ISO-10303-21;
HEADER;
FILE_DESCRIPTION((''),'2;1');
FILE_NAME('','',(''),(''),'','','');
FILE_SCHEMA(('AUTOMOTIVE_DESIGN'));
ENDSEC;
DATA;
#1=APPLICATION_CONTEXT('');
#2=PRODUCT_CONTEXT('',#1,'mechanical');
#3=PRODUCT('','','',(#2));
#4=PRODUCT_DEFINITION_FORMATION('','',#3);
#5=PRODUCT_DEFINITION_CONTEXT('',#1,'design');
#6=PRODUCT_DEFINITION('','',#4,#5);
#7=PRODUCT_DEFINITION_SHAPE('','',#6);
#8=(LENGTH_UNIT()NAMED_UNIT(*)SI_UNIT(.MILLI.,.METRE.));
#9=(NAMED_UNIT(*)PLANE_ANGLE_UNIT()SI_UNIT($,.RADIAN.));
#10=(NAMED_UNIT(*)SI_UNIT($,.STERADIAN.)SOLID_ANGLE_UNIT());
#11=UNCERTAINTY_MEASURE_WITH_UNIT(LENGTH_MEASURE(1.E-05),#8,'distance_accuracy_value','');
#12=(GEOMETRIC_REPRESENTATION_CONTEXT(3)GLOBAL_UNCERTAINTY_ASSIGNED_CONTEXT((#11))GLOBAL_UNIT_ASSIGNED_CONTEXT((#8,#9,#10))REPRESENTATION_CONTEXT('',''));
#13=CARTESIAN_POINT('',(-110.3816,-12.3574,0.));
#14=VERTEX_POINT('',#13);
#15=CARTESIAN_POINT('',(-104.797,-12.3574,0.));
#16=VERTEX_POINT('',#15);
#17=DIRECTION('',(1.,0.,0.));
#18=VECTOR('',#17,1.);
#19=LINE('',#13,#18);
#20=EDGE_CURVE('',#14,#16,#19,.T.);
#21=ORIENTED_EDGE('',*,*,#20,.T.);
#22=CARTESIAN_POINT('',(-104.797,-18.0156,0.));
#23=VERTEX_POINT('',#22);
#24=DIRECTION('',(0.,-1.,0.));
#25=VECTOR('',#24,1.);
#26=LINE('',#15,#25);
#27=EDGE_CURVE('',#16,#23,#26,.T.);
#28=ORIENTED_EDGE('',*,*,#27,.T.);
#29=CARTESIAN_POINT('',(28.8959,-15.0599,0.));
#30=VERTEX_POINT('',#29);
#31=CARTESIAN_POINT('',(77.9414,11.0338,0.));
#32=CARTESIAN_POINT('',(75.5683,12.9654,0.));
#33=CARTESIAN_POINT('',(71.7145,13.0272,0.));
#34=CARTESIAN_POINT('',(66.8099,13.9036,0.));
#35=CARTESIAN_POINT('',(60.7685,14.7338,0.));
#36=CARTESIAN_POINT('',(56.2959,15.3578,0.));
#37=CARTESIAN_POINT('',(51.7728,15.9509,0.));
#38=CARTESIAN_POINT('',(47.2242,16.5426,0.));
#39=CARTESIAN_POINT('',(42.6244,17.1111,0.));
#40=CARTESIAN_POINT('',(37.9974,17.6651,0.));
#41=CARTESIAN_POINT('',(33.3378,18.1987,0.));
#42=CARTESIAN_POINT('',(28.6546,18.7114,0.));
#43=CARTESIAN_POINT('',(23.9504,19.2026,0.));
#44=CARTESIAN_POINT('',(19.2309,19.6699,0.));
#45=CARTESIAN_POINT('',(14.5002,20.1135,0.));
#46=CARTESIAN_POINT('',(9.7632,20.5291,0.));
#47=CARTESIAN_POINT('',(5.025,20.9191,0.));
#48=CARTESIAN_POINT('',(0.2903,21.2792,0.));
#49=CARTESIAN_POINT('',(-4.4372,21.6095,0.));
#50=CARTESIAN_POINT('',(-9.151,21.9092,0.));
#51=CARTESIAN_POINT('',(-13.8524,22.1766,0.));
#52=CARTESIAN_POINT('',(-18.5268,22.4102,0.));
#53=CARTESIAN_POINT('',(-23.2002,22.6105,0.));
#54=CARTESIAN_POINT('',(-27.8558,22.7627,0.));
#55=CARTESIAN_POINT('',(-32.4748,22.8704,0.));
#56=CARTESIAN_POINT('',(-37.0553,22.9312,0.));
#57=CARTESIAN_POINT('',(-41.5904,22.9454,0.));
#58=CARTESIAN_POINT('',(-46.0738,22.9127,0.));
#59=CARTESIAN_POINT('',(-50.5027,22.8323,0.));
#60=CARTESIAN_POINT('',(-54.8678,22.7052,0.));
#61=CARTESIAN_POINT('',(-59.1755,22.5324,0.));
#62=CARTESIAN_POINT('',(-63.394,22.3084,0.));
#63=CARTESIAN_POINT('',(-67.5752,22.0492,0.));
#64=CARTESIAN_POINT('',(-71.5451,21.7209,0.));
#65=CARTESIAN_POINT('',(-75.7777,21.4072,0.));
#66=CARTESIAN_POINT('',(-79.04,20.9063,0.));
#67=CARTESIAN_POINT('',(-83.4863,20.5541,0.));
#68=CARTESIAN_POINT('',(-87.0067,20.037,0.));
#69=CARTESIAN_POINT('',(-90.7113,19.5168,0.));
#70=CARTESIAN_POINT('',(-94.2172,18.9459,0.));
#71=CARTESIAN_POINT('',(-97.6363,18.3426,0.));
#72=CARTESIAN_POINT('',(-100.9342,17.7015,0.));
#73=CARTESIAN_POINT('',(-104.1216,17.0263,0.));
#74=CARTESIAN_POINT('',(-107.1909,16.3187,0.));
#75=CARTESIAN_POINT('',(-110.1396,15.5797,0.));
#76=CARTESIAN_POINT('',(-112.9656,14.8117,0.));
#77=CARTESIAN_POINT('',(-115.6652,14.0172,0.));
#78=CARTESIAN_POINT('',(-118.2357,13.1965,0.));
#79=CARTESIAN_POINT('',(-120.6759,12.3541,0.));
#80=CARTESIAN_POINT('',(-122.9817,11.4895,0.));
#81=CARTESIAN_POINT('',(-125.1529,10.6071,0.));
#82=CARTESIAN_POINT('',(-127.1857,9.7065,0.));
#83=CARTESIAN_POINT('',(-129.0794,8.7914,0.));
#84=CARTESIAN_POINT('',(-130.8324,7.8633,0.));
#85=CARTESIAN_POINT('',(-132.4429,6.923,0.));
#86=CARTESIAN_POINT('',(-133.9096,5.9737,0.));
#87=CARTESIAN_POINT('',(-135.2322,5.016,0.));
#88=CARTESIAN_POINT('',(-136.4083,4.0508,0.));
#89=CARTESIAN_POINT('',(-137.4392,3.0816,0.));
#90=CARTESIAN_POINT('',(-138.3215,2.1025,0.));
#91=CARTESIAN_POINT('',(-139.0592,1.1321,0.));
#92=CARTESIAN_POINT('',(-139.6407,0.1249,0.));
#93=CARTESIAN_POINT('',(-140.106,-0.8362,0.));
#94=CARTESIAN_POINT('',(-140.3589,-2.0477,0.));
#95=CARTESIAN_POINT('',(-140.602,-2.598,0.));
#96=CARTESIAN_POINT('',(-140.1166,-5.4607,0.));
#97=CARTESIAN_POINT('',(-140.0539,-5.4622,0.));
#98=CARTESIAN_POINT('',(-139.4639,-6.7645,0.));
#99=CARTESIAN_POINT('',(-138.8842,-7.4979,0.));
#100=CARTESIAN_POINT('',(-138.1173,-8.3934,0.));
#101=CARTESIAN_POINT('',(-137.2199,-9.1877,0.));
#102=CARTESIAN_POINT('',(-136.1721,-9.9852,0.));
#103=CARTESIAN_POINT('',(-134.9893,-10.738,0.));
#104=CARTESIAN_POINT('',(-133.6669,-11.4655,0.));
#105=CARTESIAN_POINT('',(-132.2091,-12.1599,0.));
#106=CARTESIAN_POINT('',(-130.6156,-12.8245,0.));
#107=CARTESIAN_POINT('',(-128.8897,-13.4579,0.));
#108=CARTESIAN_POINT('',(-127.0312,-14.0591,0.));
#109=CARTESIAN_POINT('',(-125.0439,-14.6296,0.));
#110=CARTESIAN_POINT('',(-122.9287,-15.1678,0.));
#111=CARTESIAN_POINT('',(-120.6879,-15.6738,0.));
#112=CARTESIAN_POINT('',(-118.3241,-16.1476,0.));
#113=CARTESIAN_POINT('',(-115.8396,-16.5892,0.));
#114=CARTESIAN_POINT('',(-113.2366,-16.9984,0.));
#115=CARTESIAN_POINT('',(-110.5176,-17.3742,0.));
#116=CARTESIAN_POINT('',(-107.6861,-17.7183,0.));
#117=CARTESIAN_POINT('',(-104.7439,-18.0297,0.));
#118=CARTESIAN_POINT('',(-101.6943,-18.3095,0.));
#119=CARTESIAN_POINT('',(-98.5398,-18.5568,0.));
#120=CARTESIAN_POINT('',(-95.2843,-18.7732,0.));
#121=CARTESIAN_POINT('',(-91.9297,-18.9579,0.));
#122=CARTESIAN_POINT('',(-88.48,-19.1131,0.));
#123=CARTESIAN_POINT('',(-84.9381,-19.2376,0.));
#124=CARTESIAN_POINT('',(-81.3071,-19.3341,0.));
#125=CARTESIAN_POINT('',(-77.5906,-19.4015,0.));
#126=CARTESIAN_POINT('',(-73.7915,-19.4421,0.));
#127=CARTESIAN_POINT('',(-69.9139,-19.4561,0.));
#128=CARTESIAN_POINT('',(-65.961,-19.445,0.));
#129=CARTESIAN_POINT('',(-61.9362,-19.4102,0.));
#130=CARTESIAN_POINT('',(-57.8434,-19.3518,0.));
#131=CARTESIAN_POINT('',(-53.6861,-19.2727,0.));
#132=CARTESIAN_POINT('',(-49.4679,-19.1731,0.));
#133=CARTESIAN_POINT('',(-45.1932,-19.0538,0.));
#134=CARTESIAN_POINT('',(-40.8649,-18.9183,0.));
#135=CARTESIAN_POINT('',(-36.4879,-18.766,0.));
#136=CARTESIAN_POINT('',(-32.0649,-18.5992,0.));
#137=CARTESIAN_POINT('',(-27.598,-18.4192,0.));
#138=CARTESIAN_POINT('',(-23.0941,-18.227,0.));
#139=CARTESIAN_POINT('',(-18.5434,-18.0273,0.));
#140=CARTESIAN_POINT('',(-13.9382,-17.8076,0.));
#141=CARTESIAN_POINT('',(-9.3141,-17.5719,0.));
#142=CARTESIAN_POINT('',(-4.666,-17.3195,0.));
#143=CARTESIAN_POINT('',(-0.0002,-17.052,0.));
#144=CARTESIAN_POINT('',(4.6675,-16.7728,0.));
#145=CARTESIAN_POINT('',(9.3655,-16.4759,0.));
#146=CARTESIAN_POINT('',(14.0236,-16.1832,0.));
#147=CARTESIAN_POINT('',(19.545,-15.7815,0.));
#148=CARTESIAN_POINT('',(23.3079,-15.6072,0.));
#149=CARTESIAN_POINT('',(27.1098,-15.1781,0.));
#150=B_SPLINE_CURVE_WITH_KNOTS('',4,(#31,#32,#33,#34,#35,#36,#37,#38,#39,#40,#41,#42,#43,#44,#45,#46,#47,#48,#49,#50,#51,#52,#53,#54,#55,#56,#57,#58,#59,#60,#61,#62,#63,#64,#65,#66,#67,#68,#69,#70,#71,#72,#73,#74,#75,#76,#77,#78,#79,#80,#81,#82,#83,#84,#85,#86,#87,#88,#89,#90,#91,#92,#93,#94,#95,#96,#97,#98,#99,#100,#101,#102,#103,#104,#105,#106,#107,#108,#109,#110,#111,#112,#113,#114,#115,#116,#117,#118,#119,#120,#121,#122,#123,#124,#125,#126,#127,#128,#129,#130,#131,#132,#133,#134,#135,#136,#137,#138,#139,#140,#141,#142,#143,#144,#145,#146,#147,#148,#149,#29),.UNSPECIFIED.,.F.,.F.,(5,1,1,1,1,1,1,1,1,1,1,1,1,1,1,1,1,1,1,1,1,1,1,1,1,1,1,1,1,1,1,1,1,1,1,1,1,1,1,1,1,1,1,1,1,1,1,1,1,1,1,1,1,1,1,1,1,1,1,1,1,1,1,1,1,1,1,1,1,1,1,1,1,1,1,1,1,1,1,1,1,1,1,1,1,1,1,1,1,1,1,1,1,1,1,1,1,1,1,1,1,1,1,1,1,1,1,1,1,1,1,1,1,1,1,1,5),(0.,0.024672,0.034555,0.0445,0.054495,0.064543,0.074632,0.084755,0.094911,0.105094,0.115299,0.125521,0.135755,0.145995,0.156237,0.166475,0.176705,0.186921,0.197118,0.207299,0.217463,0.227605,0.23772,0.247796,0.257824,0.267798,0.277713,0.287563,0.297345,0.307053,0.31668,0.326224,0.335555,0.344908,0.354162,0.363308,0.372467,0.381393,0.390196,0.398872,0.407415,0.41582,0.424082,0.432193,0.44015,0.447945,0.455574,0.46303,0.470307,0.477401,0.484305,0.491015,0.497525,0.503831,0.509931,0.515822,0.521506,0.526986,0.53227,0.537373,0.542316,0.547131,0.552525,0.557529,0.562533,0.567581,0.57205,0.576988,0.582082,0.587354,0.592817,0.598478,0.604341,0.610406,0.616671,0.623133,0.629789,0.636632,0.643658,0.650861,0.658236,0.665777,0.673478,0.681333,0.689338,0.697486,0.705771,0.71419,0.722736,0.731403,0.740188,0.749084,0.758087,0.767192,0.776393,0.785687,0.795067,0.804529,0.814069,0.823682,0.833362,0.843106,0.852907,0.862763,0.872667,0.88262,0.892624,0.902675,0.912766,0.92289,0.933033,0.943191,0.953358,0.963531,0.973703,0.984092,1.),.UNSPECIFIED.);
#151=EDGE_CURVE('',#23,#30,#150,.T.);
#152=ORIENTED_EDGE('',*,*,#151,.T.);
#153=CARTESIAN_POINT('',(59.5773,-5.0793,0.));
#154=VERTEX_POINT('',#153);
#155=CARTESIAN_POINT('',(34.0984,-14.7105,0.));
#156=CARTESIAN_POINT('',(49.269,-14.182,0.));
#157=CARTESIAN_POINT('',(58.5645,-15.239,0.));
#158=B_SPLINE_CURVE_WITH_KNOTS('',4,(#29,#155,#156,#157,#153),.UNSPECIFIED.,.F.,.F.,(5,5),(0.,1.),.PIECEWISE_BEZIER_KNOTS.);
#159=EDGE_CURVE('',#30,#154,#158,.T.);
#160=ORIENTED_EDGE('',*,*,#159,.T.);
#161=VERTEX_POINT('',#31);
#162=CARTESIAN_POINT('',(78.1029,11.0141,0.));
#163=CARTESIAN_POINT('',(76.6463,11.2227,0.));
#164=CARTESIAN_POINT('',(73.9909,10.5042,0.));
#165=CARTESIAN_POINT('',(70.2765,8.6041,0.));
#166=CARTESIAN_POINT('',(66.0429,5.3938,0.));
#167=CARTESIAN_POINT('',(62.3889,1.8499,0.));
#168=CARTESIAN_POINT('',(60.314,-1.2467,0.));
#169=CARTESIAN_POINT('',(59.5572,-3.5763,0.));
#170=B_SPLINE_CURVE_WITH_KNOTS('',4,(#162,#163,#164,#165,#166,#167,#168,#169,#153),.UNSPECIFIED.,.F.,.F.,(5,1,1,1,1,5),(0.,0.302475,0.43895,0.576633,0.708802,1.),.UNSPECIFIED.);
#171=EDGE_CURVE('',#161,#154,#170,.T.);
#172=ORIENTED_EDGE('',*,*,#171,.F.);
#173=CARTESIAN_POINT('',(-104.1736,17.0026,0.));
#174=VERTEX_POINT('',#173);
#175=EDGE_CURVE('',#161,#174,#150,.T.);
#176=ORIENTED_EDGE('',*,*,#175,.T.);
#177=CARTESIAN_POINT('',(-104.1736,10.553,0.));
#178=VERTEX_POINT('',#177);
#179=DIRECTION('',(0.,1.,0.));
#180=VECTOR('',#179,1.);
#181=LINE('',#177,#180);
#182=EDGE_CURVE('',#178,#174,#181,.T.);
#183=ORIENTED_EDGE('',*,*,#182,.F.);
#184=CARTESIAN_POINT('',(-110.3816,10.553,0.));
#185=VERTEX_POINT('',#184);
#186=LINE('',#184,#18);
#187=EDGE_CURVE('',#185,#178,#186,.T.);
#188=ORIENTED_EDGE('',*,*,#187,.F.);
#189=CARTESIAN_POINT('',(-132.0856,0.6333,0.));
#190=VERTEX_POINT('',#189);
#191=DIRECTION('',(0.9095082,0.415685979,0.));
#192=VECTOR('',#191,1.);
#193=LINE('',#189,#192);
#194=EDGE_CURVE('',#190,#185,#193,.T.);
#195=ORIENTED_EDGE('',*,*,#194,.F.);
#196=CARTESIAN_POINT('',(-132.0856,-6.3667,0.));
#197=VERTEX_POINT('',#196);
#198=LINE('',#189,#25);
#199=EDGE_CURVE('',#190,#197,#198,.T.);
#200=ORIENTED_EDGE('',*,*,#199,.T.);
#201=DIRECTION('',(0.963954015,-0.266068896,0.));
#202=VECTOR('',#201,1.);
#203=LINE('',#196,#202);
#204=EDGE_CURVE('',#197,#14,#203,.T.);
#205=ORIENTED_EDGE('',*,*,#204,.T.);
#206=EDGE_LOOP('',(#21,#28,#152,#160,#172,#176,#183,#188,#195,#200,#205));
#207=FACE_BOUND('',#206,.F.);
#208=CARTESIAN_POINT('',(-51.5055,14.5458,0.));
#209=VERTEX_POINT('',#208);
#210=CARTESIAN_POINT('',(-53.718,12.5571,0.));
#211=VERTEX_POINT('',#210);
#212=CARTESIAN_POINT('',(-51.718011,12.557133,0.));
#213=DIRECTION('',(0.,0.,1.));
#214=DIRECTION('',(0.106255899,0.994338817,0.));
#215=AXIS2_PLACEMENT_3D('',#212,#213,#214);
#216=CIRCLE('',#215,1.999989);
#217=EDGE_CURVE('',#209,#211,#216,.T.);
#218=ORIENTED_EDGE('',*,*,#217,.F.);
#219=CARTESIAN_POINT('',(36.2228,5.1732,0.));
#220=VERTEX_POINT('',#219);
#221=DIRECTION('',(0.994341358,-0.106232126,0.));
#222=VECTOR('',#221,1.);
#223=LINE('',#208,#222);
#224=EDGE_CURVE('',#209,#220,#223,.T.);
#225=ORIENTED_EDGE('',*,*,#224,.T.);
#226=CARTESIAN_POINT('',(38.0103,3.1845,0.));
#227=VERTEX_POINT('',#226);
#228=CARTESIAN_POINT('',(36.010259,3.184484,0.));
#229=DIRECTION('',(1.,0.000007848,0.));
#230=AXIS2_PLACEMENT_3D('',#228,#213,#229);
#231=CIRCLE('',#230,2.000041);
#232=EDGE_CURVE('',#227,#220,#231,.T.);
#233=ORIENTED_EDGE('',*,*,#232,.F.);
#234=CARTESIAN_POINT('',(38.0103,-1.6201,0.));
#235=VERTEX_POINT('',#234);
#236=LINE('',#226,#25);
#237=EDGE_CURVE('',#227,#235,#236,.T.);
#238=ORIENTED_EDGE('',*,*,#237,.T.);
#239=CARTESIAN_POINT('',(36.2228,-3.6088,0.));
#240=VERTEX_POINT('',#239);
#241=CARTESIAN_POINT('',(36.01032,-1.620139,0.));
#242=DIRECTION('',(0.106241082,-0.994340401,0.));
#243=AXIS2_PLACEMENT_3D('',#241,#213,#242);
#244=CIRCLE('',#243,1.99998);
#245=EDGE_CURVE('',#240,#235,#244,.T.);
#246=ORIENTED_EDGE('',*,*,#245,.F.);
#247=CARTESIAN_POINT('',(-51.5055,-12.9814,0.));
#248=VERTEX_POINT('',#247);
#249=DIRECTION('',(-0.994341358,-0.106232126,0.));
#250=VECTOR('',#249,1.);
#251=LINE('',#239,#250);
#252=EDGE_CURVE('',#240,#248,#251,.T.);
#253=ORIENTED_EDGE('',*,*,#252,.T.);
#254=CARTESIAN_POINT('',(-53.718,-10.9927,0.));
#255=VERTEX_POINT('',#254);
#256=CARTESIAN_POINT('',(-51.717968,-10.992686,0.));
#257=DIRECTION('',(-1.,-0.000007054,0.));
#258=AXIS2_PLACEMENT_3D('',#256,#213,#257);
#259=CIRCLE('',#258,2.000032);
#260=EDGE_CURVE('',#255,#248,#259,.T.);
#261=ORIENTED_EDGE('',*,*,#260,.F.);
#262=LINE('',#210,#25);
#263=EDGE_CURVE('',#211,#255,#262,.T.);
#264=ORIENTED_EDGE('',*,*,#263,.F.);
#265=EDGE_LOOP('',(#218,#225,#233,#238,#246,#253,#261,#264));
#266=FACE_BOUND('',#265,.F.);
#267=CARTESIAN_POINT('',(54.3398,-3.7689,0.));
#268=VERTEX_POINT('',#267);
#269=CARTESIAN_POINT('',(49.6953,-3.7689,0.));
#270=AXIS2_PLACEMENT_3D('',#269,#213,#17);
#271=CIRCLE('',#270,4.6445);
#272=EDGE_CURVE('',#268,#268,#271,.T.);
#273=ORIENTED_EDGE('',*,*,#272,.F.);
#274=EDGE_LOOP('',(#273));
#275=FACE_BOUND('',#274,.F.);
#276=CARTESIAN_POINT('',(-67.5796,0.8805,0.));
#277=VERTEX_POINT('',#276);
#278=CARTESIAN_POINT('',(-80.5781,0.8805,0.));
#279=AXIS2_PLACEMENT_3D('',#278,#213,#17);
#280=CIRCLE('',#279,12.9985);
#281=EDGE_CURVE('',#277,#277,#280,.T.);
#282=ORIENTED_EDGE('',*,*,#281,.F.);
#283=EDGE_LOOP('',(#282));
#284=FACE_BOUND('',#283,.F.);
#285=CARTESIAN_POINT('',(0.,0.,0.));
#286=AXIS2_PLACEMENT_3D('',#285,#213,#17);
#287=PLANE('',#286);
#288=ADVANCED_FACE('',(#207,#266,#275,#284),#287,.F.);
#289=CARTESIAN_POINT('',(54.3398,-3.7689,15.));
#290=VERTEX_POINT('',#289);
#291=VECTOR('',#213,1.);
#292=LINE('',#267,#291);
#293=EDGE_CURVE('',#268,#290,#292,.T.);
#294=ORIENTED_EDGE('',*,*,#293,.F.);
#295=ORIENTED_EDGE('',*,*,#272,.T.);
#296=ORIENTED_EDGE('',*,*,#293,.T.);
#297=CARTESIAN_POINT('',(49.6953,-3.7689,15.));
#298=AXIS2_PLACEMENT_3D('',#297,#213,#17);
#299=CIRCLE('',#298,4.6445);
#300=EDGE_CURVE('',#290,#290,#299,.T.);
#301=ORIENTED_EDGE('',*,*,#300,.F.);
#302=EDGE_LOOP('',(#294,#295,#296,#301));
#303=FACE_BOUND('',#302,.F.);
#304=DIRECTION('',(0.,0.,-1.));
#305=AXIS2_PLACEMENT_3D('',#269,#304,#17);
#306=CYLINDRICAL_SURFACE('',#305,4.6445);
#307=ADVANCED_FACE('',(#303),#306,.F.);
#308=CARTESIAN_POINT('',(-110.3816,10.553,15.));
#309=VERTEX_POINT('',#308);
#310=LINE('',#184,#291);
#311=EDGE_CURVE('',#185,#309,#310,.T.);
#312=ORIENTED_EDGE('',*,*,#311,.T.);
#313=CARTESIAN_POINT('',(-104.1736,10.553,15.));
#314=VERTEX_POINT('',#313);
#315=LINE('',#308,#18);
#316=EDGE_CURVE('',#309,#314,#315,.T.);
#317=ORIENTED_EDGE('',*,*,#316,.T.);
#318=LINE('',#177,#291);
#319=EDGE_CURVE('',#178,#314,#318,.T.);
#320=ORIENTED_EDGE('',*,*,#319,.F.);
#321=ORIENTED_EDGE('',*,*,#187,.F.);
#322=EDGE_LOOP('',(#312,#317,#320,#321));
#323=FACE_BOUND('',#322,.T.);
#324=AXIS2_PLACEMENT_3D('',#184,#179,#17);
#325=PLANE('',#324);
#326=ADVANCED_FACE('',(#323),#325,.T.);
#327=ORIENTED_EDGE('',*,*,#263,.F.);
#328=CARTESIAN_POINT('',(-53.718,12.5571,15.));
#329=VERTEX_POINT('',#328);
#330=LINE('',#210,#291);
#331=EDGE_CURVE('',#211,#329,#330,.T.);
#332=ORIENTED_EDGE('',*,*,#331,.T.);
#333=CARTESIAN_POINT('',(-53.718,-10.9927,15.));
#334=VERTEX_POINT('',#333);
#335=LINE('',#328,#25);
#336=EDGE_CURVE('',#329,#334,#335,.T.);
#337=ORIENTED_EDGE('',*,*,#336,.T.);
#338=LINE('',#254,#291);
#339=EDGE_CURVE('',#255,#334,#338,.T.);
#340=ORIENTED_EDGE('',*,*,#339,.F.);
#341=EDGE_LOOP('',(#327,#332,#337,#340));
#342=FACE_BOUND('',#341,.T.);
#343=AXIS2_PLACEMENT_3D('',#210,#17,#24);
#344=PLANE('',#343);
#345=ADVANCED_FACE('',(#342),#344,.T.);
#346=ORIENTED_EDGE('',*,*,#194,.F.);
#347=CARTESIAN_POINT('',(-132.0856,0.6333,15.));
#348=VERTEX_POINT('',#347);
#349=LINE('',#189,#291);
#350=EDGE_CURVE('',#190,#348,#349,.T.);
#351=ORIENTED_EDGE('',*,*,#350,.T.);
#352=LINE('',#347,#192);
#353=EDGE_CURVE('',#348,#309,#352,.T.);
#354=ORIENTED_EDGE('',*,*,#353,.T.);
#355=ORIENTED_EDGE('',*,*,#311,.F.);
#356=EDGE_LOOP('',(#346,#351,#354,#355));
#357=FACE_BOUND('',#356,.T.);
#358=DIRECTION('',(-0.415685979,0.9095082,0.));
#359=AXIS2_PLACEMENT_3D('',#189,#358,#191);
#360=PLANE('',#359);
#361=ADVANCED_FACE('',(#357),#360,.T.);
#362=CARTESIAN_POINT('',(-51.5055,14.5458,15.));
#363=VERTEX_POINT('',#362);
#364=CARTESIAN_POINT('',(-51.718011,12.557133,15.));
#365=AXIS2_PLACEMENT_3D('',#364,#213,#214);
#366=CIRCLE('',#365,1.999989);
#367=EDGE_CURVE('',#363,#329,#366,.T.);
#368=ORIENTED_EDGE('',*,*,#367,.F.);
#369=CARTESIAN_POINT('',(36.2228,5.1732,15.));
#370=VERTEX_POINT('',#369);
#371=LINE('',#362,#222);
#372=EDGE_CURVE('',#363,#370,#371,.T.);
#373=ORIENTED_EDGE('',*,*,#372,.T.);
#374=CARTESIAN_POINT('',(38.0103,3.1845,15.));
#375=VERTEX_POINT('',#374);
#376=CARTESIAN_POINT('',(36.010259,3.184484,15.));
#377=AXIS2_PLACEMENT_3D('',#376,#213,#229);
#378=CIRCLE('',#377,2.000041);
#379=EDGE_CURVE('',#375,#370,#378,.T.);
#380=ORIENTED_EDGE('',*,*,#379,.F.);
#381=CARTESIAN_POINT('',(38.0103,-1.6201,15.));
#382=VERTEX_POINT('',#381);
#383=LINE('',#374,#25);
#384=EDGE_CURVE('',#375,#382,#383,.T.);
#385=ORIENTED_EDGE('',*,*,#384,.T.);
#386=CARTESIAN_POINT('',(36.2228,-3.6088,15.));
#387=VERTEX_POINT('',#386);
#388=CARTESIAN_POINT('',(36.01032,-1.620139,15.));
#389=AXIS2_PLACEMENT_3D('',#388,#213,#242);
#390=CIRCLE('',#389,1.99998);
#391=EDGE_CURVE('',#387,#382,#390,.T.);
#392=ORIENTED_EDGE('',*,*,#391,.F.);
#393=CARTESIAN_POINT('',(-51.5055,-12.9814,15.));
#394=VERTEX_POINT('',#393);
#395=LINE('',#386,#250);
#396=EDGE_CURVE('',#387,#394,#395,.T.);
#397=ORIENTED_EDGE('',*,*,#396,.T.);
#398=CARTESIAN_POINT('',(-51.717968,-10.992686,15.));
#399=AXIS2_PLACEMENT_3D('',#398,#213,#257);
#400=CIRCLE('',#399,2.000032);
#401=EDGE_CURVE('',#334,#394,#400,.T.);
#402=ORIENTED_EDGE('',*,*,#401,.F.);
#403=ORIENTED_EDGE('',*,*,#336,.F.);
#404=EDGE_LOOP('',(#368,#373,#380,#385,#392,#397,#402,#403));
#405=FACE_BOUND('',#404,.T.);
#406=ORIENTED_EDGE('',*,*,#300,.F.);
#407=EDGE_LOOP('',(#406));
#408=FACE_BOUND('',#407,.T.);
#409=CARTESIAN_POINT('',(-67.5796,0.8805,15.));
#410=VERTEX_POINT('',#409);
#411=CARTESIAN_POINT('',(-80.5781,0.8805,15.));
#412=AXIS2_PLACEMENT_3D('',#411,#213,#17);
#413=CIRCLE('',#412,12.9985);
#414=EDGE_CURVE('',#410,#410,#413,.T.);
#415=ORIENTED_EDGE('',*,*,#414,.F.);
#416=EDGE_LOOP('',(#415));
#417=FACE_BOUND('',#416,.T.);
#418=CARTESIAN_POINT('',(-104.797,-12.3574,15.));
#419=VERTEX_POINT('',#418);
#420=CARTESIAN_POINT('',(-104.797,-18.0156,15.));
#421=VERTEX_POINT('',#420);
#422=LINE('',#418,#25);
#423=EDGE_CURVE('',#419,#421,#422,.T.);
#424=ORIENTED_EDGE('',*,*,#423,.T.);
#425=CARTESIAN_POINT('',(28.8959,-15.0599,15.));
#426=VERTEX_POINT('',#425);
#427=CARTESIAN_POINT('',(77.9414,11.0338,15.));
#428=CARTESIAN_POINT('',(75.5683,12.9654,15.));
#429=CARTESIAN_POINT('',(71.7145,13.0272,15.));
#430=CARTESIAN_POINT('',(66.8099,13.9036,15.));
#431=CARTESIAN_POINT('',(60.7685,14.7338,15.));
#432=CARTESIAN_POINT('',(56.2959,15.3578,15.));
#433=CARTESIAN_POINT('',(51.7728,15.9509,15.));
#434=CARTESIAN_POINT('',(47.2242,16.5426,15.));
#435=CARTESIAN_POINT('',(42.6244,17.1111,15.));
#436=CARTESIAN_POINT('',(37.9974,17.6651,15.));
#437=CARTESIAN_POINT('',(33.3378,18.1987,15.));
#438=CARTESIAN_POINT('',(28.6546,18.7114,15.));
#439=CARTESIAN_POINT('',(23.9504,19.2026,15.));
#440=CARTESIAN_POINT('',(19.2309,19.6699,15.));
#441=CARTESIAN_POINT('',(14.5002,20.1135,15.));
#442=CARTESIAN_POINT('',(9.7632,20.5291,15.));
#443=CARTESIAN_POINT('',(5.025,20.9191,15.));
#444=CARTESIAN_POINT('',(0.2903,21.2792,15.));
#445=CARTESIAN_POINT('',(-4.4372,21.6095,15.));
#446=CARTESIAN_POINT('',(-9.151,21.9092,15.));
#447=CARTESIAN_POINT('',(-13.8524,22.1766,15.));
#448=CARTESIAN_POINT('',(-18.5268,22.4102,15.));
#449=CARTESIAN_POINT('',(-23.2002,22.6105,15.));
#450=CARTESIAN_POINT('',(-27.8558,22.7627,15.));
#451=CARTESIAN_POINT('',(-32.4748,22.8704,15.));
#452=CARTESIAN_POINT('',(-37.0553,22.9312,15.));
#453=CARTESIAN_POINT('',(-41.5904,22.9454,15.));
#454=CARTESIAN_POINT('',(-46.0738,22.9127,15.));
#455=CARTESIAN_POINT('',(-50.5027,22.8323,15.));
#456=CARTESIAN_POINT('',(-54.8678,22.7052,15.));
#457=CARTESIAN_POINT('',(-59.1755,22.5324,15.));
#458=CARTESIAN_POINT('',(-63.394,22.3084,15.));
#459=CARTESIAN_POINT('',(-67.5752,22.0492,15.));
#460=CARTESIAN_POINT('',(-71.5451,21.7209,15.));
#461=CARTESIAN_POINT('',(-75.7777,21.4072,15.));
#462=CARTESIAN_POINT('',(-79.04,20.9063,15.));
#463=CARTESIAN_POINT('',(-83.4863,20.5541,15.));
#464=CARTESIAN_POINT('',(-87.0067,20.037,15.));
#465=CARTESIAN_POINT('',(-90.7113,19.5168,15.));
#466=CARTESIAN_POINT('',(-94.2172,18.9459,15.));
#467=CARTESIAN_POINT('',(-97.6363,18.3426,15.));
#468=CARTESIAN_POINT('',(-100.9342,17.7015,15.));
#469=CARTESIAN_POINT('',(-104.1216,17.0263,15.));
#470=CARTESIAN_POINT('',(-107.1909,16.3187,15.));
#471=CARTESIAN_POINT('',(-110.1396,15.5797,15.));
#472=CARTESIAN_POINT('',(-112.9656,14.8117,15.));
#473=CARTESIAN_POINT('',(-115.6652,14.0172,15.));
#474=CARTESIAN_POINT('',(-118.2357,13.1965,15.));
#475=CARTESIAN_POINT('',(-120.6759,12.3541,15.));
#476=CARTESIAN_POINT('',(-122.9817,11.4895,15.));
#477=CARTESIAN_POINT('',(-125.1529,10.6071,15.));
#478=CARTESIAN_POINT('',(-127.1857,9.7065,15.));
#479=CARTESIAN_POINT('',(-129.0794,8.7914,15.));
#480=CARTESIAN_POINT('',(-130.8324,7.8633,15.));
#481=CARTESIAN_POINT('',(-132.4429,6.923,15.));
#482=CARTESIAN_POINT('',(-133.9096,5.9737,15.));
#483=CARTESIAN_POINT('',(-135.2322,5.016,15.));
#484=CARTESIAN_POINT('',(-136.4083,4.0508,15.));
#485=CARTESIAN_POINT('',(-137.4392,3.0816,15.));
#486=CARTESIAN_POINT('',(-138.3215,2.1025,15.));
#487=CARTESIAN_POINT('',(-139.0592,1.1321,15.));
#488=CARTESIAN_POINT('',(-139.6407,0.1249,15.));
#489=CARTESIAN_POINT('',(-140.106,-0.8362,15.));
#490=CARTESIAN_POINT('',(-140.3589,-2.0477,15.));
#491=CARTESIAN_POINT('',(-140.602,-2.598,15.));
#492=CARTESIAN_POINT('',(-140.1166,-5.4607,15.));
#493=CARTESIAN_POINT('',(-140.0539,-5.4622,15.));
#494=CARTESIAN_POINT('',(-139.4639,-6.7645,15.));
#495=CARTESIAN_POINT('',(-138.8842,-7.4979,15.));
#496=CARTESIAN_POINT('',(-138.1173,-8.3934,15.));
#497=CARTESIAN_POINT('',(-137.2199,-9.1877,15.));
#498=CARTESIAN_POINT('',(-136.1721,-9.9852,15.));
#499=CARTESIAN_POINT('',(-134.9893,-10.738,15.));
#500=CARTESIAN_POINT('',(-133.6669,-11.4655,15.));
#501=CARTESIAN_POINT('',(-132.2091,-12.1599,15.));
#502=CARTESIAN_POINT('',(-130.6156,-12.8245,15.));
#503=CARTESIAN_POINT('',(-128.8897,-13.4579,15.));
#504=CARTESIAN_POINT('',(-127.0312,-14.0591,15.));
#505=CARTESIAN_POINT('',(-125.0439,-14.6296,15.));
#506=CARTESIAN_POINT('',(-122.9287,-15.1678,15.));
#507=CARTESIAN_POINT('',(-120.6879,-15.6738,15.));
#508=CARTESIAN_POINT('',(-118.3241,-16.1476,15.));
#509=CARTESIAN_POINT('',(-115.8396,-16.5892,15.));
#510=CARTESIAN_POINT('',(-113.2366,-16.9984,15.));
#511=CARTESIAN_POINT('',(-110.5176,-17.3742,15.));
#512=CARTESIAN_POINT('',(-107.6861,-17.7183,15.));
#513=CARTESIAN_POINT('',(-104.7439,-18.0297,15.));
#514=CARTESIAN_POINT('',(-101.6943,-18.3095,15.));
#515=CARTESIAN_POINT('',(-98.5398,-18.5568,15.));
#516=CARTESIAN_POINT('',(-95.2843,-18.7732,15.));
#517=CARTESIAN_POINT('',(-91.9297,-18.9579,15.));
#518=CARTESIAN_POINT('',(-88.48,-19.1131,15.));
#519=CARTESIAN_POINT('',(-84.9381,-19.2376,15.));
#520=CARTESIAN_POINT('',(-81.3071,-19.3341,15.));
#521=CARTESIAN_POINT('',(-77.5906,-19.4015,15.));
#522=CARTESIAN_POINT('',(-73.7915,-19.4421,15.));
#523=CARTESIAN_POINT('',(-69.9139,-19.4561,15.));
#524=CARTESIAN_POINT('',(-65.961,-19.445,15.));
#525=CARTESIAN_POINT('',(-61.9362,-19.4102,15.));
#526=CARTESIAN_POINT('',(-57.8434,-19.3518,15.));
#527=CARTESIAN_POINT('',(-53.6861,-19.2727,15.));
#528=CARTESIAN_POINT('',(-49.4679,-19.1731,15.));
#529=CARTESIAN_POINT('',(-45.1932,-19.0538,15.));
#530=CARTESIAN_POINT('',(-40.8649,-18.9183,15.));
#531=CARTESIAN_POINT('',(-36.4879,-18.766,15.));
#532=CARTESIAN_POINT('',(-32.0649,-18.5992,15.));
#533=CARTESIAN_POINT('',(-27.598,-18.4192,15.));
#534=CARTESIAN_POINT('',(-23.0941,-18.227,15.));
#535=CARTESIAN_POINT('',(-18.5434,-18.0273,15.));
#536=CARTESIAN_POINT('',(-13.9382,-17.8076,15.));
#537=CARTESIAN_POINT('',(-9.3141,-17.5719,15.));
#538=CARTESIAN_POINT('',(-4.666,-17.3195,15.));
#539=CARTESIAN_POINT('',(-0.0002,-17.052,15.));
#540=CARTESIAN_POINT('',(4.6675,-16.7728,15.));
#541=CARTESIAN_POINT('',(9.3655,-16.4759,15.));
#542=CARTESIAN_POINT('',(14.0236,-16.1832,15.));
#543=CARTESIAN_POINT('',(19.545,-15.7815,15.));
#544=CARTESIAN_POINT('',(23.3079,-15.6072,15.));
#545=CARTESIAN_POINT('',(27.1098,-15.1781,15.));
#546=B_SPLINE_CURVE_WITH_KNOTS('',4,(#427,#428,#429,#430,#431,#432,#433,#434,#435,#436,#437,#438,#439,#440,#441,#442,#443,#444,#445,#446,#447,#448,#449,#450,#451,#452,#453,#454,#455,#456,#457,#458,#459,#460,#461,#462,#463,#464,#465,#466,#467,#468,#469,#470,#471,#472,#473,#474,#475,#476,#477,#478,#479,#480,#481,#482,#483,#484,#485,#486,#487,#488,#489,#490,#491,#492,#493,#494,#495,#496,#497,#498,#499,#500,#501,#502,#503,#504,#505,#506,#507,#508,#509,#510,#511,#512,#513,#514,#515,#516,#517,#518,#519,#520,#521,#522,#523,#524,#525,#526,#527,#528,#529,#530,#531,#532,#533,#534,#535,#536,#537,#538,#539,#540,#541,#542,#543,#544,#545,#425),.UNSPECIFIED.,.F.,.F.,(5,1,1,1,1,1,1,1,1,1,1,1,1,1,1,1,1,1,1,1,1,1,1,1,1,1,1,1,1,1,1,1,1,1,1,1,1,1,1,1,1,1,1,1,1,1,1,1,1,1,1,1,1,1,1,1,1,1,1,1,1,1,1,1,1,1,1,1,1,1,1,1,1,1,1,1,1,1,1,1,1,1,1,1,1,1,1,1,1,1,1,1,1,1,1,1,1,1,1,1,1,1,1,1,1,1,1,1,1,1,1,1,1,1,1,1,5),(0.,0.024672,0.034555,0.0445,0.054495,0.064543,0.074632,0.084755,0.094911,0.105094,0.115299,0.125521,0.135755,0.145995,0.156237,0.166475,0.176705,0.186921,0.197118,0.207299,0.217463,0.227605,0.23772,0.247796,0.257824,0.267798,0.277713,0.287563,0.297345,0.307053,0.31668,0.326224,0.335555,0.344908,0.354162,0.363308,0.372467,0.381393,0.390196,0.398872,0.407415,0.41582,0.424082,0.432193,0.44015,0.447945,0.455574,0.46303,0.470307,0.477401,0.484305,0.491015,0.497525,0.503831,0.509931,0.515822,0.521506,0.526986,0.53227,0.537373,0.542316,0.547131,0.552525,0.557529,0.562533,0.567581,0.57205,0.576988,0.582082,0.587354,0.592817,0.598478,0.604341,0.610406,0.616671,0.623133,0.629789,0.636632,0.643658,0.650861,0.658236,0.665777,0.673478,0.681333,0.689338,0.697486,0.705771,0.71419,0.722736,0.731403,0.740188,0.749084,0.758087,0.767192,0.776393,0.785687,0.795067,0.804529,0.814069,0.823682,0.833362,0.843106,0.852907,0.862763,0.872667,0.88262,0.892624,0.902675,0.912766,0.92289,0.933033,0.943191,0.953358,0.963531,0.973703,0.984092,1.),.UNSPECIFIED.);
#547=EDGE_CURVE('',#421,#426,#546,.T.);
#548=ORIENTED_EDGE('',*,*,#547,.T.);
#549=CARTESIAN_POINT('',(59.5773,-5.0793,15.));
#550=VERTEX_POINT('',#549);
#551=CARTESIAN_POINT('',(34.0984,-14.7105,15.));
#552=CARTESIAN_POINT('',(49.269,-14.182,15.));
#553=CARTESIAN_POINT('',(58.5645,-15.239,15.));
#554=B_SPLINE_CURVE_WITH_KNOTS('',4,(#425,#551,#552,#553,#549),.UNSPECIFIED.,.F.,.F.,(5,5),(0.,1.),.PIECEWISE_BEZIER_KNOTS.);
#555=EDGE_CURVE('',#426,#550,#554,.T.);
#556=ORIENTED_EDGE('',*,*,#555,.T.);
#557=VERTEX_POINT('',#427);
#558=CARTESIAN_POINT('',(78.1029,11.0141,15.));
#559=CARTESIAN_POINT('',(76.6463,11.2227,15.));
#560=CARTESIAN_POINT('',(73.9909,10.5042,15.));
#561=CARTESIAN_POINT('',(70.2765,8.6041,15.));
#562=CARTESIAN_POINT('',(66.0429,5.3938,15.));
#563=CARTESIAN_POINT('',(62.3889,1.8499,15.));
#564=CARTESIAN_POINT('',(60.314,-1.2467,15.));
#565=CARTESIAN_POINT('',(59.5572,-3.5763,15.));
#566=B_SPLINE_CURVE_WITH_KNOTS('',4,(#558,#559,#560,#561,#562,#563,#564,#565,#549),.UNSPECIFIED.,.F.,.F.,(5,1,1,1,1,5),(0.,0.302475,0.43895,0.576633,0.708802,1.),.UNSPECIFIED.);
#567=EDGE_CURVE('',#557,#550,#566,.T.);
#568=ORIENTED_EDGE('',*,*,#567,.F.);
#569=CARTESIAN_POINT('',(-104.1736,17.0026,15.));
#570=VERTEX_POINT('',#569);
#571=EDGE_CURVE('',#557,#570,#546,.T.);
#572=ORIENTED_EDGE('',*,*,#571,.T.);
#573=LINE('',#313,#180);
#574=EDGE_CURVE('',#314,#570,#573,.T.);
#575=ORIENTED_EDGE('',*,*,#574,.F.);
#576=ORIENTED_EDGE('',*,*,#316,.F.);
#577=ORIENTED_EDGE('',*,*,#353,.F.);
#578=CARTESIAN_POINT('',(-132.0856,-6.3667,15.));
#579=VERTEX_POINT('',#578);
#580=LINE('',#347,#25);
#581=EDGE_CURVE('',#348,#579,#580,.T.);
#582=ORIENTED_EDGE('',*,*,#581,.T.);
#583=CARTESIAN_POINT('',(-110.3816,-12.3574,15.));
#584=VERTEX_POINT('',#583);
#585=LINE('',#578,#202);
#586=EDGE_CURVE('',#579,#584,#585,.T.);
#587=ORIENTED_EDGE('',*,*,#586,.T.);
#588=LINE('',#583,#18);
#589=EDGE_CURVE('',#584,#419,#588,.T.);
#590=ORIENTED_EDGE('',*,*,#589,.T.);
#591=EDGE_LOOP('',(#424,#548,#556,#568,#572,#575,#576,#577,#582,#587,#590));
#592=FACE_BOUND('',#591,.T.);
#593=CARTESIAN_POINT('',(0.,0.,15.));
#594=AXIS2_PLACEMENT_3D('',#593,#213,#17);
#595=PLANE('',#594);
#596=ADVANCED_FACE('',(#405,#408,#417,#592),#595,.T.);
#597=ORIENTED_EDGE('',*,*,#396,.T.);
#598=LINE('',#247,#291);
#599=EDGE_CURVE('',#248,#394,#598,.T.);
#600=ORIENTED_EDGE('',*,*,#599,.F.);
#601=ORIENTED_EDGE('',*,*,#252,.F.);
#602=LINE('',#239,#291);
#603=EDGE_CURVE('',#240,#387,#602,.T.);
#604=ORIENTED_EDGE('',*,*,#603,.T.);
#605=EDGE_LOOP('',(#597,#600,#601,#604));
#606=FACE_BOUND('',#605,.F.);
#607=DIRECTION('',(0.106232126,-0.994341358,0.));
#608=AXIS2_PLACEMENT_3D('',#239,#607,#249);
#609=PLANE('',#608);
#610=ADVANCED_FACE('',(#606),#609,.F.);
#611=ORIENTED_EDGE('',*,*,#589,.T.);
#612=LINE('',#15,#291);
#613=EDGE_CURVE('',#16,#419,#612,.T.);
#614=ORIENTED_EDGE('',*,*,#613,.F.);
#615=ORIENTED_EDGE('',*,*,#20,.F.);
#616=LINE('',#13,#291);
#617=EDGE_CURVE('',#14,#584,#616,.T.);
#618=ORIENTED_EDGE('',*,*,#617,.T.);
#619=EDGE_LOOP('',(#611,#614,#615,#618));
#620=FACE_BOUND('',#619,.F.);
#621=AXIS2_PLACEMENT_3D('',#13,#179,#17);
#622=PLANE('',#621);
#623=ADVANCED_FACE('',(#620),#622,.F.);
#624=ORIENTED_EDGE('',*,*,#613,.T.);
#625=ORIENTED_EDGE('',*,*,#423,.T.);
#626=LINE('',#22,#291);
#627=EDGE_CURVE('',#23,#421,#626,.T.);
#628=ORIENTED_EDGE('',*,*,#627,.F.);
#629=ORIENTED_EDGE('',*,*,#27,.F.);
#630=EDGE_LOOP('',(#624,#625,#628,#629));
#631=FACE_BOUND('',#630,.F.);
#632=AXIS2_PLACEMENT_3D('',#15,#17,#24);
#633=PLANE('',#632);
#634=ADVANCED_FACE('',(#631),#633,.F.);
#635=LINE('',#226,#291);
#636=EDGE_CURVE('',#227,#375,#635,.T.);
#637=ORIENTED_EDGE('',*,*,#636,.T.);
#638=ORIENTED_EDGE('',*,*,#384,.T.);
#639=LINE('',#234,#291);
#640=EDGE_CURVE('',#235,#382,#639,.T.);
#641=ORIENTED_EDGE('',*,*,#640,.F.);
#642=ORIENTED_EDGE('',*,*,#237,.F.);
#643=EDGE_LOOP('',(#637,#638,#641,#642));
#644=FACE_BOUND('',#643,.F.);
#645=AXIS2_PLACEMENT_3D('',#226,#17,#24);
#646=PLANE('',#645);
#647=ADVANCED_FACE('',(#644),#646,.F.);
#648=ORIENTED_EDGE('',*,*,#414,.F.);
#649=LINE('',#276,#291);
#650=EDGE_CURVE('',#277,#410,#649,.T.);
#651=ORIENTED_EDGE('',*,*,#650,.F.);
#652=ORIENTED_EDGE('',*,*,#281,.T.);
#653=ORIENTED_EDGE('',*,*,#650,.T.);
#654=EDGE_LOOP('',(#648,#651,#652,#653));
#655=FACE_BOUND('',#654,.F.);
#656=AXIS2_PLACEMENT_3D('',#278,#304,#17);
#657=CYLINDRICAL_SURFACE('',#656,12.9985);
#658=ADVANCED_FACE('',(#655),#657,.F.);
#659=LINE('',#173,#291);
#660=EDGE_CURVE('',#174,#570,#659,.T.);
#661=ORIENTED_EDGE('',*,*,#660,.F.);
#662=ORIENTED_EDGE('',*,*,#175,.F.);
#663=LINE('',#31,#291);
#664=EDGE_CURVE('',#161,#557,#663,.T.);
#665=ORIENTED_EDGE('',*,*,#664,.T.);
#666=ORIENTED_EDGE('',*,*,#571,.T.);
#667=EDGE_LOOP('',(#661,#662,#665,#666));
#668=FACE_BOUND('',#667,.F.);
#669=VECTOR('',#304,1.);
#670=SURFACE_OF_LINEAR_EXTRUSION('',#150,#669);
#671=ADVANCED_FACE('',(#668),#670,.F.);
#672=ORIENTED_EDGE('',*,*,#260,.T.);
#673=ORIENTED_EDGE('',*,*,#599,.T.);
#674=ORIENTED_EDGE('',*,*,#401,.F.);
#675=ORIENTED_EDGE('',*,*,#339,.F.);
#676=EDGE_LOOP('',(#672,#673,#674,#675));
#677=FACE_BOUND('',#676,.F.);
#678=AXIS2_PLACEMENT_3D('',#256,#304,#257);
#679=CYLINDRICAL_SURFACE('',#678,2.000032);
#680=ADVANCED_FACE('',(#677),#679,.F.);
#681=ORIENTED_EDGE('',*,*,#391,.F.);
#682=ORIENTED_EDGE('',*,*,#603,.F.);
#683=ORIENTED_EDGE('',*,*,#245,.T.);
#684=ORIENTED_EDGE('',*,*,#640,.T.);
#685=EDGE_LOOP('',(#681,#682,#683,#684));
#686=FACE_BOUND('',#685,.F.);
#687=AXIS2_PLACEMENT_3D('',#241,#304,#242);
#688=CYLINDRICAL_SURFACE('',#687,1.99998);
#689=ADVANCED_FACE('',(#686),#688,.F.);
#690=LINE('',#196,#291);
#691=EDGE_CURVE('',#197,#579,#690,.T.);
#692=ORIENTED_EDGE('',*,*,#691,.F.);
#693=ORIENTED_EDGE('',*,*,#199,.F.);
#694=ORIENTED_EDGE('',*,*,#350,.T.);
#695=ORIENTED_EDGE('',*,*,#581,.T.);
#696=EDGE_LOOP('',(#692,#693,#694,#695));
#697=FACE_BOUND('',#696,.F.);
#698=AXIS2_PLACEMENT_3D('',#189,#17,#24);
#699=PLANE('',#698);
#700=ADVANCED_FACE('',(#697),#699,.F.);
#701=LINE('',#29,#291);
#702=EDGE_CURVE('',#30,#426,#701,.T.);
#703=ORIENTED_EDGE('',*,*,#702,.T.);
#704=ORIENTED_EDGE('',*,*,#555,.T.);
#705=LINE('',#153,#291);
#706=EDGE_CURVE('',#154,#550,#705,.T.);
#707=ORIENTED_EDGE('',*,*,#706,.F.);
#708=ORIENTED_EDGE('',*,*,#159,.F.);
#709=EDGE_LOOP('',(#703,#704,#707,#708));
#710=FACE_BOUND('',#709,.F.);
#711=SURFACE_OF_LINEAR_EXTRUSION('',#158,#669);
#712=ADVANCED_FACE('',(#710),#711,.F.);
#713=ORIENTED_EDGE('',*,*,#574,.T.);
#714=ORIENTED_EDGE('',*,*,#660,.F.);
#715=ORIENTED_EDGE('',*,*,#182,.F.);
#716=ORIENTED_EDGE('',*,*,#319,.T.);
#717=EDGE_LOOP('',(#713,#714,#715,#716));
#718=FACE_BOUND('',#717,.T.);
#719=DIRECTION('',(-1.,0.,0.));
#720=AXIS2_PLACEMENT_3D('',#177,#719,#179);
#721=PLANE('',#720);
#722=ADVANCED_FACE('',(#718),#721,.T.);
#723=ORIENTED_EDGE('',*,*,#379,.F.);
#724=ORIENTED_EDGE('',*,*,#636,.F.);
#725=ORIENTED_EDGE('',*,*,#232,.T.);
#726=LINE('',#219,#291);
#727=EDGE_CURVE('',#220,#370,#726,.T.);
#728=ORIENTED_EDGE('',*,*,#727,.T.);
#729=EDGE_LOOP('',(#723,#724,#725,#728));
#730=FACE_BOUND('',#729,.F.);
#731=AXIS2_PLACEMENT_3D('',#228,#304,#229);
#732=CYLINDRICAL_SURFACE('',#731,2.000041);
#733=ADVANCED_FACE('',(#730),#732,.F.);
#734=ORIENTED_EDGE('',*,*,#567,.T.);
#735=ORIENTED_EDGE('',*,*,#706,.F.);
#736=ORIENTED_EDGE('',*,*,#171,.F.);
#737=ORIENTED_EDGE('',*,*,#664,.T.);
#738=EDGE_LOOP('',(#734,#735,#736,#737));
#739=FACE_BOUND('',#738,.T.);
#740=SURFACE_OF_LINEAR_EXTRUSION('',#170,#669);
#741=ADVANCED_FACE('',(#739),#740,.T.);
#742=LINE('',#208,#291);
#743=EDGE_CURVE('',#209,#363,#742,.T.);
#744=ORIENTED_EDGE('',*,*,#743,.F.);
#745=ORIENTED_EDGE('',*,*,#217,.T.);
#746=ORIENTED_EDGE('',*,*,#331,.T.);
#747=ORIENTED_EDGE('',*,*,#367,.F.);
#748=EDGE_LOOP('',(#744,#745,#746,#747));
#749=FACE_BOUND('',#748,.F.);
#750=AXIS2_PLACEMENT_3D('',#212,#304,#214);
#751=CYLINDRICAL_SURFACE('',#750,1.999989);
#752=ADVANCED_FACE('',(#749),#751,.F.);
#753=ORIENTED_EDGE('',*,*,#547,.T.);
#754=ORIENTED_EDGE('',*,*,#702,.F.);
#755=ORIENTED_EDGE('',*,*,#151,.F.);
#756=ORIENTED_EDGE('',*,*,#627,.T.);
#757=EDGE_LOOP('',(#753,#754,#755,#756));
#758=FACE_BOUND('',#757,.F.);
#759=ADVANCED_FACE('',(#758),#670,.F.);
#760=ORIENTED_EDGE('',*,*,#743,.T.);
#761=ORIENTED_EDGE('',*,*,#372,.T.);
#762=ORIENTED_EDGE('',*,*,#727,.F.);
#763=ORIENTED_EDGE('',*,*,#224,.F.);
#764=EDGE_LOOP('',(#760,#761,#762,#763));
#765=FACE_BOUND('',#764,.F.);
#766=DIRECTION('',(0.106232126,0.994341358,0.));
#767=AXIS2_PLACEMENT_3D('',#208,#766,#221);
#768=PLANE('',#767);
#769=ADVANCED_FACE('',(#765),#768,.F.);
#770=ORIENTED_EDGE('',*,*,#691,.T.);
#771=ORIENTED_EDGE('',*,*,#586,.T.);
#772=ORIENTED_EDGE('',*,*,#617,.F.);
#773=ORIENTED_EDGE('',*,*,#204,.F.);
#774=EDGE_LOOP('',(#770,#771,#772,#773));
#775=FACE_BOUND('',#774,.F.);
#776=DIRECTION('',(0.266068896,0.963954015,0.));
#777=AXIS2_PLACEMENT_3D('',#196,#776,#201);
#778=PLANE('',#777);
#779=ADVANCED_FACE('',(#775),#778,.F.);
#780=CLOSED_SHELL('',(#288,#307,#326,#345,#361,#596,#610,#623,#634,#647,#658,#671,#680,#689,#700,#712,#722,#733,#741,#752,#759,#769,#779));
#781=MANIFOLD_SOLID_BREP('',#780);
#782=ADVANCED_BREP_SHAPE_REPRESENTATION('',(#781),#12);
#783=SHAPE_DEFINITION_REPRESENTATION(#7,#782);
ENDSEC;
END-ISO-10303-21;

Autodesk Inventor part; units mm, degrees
ref_plane "YZ Plane" through (0, 0, 0) normal (1, 0, 0) x (0, 1, 0)
ref_plane "XZ Plane" through (0, 0, 0) normal (0, 1, 0) x (-1, 0, 0)
ref_plane "XY Plane" through (0, 0, 0) normal (0, 0, 1) x (1, 0, 0)
sketch "Sketch3" plane through (0, 0, 0) normal (0, 0, 1) x (1, 0, 0)
  line L0 (-80.5781, 0.8805) -> (-80.5781, 20.7988) construction
  circle A0 centre (-80.5781, 0.8805) radius 12.9985
  line L1 (-53.718, 12.5571) -> (-53.718, -10.9927)
  arc A1 (-53.718, -10.9927) -> (-51.5055, -12.9814) centre (-51.718, -10.9927) ccw
  arc A2 (-51.5055, 14.5458) -> (-53.718, 12.5571) centre (-51.718, 12.5571) ccw
  line L2 (36.2228, -3.6088) -> (-51.5055, -12.9814)
  line L3 (38.0103, 3.1845) -> (38.0103, -1.6201)
  line L4 (-80.5781, 0.8805) -> (49.5525, 0.8805) construction
  circle A3 centre (49.6953, -3.7689) radius 4.6445
  line L5 (59.6953, 14.884) -> (59.6953, -12.7998) construction
  spline S0 degree 4 poles (77.9414, 11.0338) (75.5683, 12.9654) (71.7145, 13.0272) (66.8099, 13.9036) (60.7685, 14.7338) (56.2959, 15.3578) (51.7728, 15.9509) (47.2242, 16.5426) (42.6244, 17.1111) (37.9974, 17.6651) (33.3378, 18.1987) (28.6546, 18.7114) (23.9504, 19.2026) (19.2309, 19.6699) (14.5002, 20.1135) (9.7632, 20.5291) (5.025, 20.9191) (0.2903, 21.2792) (-4.4372, 21.6095) (-9.151, 21.9092) (-13.8524, 22.1766) (-18.5268, 22.4102) (-23.2002, 22.6105) (-27.8558, 22.7627) (-32.4748, 22.8704) (-37.0553, 22.9312) (-41.5904, 22.9454) (-46.0738, 22.9127) (-50.5027, 22.8323) (-54.8678, 22.7052) (-59.1755, 22.5324) (-63.394, 22.3084) (-67.5752, 22.0492) (-71.5451, 21.7209) (-75.7777, 21.4072) (-79.04, 20.9063) (-83.4863, 20.5541) (-87.0067, 20.037) (-90.7113, 19.5168) (-94.2172, 18.9459) (-97.6363, 18.3426) (-100.9342, 17.7015) (-104.1216, 17.0263) (-107.1909, 16.3187) (-110.1396, 15.5797) (-112.9656, 14.8117) (-115.6652, 14.0172) (-118.2357, 13.1965) (-120.6759, 12.3541) (-122.9817, 11.4895) (-125.1529, 10.6071) (-127.1857, 9.7065) (-129.0794, 8.7914) (-130.8324, 7.8633) (-132.4429, 6.923) (-133.9096, 5.9737) (-135.2322, 5.016) (-136.4083, 4.0508) (-137.4392, 3.0816) (-138.3215, 2.1025) (-139.0592, 1.1321) (-139.6407, 0.1249) (-140.106, -0.8362) (-140.3589, -2.0477) (-140.602, -2.598) (-140.1166, -5.4607) (-140.0539, -5.4622) (-139.4639, -6.7645) (-138.8842, -7.4979) (-138.1173, -8.3934) (-137.2199, -9.1877) (-136.1721, -9.9852) (-134.9893, -10.738) (-133.6669, -11.4655) (-132.2091, -12.1599) (-130.6156, -12.8245) (-128.8897, -13.4579) (-127.0312, -14.0591) (-125.0439, -14.6296) (-122.9287, -15.1678) (-120.6879, -15.6738) (-118.3241, -16.1476) (-115.8396, -16.5892) (-113.2366, -16.9984) (-110.5176, -17.3742) (-107.6861, -17.7183) (-104.7439, -18.0297) (-101.6943, -18.3095) (-98.5398, -18.5568) (-95.2843, -18.7732) (-91.9297, -18.9579) (-88.48, -19.1131) (-84.9381, -19.2376) (-81.3071, -19.3341) (-77.5906, -19.4015) (-73.7915, -19.4421) (-69.9139, -19.4561) (-65.961, -19.445) (-61.9362, -19.4102) (-57.8434, -19.3518) (-53.6861, -19.2727) (-49.4679, -19.1731) (-45.1932, -19.0538) (-40.8649, -18.9183) (-36.4879, -18.766) (-32.0649, -18.5992) (-27.598, -18.4192) (-23.0941, -18.227) (-18.5434, -18.0273) (-13.9382, -17.8076) (-9.3141, -17.5719) (-4.666, -17.3195) (-0.0002, -17.052) (4.6675, -16.7728) (9.3655, -16.4759) (14.0236, -16.1832) (19.545, -15.7815) (23.3079, -15.6072) (27.1098, -15.1781) (28.8959, -15.0599) knots 0 0 0 0 0 0.024672 0.034555 0.0445 0.054495 0.064543 0.074632 0.084755 0.094911 0.105094 0.115299 0.125521 0.135755 0.145995 0.156237 0.166475 0.176705 0.186921 0.197118 0.207299 0.217463 0.227605 0.23772 0.247796 0.257824 0.267798 0.277713 0.287563 0.297345 0.307053 0.31668 0.326224 0.335555 0.344908 0.354162 0.363308 0.372467 0.381393 0.390196 0.398872 0.407415 0.41582 0.424082 0.432193 0.44015 0.447945 0.455574 0.46303 0.470307 0.477401 0.484305 0.491015 0.497525 0.503831 0.509931 0.515822 0.521506 0.526986 0.53227 0.537373 0.542316 0.547131 0.552525 0.557529 0.562533 0.567581 0.57205 0.576988 0.582082 0.587354 0.592817 0.598478 0.604341 0.610406 0.616671 0.623133 0.629789 0.636632 0.643658 0.650861 0.658236 0.665777 0.673478 0.681333 0.689338 0.697486 0.705771 0.71419 0.722736 0.731403 0.740188 0.749084 0.758087 0.767192 0.776393 0.785687 0.795067 0.804529 0.814069 0.823682 0.833362 0.843106 0.852907 0.862763 0.872667 0.88262 0.892624 0.902675 0.912766 0.92289 0.933033 0.943191 0.953358 0.963531 0.973703 0.984092 1 1 1 1 1
  line L6 (7.5013, -16.4763) -> (50.2906, -13.6435) construction
  arc A4 (44.8353, -17.2546) -> (13.385, -19.3367) centre (31.5327, -54.8885) ccw construction
  line L7 (159.6953, -3.8066) -> (59.6953, -3.8066) construction
  line L8 (-51.5055, 14.5458) -> (36.2228, 5.1732)
  arc A5 (36.2228, -3.6088) -> (38.0103, -1.6201) centre (36.0103, -1.6201) ccw
  arc A6 (38.0103, 3.1845) -> (36.2228, 5.1732) centre (36.0103, 3.1845) ccw
  spline S1 degree 4 poles (78.1029, 11.0141) (76.6463, 11.2227) (73.9909, 10.5042) (70.2765, 8.6041) (66.0429, 5.3938) (62.3889, 1.8499) (60.314, -1.2467) (59.5572, -3.5763) (59.5773, -5.0793) knots 0 0 0 0 0 0.302475 0.43895 0.576633 0.708802 1 1 1 1 1
  spline S2 degree 4 poles (28.8959, -15.0599) (34.0984, -14.7105) (49.269, -14.182) (58.5645, -15.239) (59.5773, -5.0793) knots 0 0 0 0 0 1 1 1 1 1
  line L9 (28.8959, -15.0599) -> (34.0984, -14.7105) construction
  line L10 (34.0984, -14.7105) -> (49.269, -14.182) construction
  line L11 (49.269, -14.182) -> (58.5645, -15.239) construction
  line L12 (58.5645, -15.239) -> (59.5773, -5.0793) construction
  line L13 (-140.4646, -2.8394) -> (159.4818, -3.8173) construction
  line L14 (-132.0856, 0.6333) -> (-132.0856, -6.3667)
  line L15 (-132.0856, -6.3667) -> (-110.3816, -12.3574)
  line L16 (-110.3816, -12.3574) -> (-104.797, -12.3574)
  line L17 (-104.797, -12.3574) -> (-104.797, -18.0156)
  line L18 (-132.0856, 0.6333) -> (-110.3816, 10.553)
  line L19 (-110.3816, 10.553) -> (-104.1736, 10.553)
  line L20 (-104.1736, 10.553) -> (-104.1736, 17.0026)
  point P0 (0, 0)
  point P1 (17.6589, 23.5628)
  point P2 (75.883, 10.8572)
  point P3 (72.8647, 9.7686)
  point P4 (69.4179, 7.8149)
  point P5 (66.0452, 5.2617)
  point P6 (63.1887, 2.4463)
  point P7 (61.1228, -0.3317)
  point P8 (59.9357, -2.8689)
  point P9 (-160.0931, -3.8671)
  point P10 (28.8959, -15.0599)
  point P11 (69.5533, 13.4647)
  point P12 (65.1899, 14.1023)
  point P13 (60.7936, 14.7318)
  point P14 (56.3207, 15.3468)
  point P15 (51.7945, 15.947)
  point P16 (47.2398, 16.5346)
  point P17 (42.6414, 17.1053)
  point P18 (38.0104, 17.6585)
  point P19 (33.3491, 18.1925)
  point P20 (28.6632, 18.7055)
  point P21 (23.9568, 19.1966)
  point P22 (19.2348, 19.6643)
  point P23 (14.5017, 20.1074)
  point P24 (9.7623, 20.5238)
  point P25 (5.0217, 20.9132)
  point P26 (0.2844, 21.2735)
  point P27 (-4.4451, 21.6038)
  point P28 (-9.1614, 21.9032)
  point P29 (-13.86, 22.1702)
  point P30 (-18.5361, 22.4036)
  point P31 (-23.211, 22.601)
  point P32 (-27.8721, 22.754)
  point P33 (-32.4966, 22.8611)
  point P34 (-37.0797, 22.9217)
  point P35 (-41.6169, 22.9356)
  point P36 (-46.1028, 22.9023)
  point P37 (-50.5329, 22.8216)
  point P38 (-54.9021, 22.6941)
  point P39 (-59.2065, 22.5195)
  point P40 (-63.4406, 22.2977)
  point P41 (-67.6008, 22.0302)
  point P42 (-71.6806, 21.7165)
  point P43 (-75.6814, 21.3591)
  point P44 (-79.1834, 20.9458)
  point P45 (-83.4048, 20.5095)
  point P46 (-87.1309, 20.023)
  point P47 (-90.7527, 19.494)
  point P48 (-94.2725, 18.9266)
  point P49 (-97.6845, 18.3211)
  point P50 (-100.9861, 17.6791)
  point P51 (-107.2438, 16.2934)
  point P52 (-110.1931, 15.553)
  point P53 (-113.0194, 14.7835)
  point P54 (-115.7191, 13.987)
  point P55 (-118.2898, 13.165)
  point P56 (-120.7294, 12.3201)
  point P57 (-123.0349, 11.454)
  point P58 (-125.2048, 10.569)
  point P59 (-127.2364, 9.6666)
  point P60 (-129.1282, 8.7491)
  point P61 (-130.8786, 7.8185)
  point P62 (-132.486, 6.8762)
  point P63 (-133.9488, 5.9245)
  point P64 (-135.2661, 4.9648)
  point P65 (-136.4363, 3.9987)
  point P66 (-137.4592, 3.0275)
  point P67 (-138.3336, 2.0531)
  point P68 (-139.0591, 1.0763)
  point P69 (-139.6352, 0.0983)
  point P70 (-140.0613, -0.8802)
  point P71 (-140.338, -1.8576)
  point P72 (-140.1239, -5.2398)
  point P73 (-139.9547, -5.7022)
  point P74 (-139.492, -6.6066)
  point P75 (-138.8844, -7.4823)
  point P76 (-138.1328, -8.3292)
  point P77 (-137.2384, -9.147)
  point P78 (-136.202, -9.9355)
  point P79 (-135.0249, -10.6943)
  point P80 (-133.7085, -11.4228)
  point P81 (-132.2548, -12.1206)
  point P82 (-130.6648, -12.7879)
  point P83 (-128.941, -13.4239)
  point P84 (-127.0846, -14.0282)
  point P85 (-125.0983, -14.6009)
  point P86 (-122.9839, -15.1415)
  point P87 (-120.7435, -15.6497)
  point P88 (-118.3798, -16.1256)
  point P89 (-115.8952, -16.569)
  point P90 (-113.2918, -16.9797)
  point P91 (-110.5723, -17.3574)
  point P92 (-107.74, -17.7027)
  point P93 (-101.7463, -18.2964)
  point P94 (-98.5909, -18.5451)
  point P95 (-95.3341, -18.7623)
  point P96 (-91.9783, -18.9484)
  point P97 (-88.5271, -19.1041)
  point P98 (-84.9838, -19.2298)
  point P99 (-81.3514, -19.3267)
  point P100 (-77.6332, -19.3951)
  point P101 (-73.8324, -19.4362)
  point P102 (-69.9531, -19.4509)
  point P103 (-65.9985, -19.4404)
  point P104 (-61.9719, -19.4059)
  point P105 (-57.8772, -19.3483)
  point P106 (-53.718, -19.2694)
  point P107 (-49.4979, -19.1701)
  point P108 (-45.2211, -19.0516)
  point P109 (-40.8909, -18.916)
  point P110 (-36.5118, -18.7642)
  point P111 (-32.0871, -18.5977)
  point P112 (-27.6213, -18.418)
  point P113 (-23.1183, -18.2269)
  point P114 (-18.5646, -18.0247)
  point P115 (-13.9566, -17.8054)
  point P116 (-9.3252, -17.5693)
  point P117 (-4.674, -17.317)
  point P118 (-0.0078, -17.05)
  point P119 (4.6686, -16.7695)
  point P120 (9.3513, -16.477)
  point P121 (14.0352, -16.1731)
  point P122 (18.7161, -15.8596)
  point P123 (23.3889, -15.5371)
  point P124 (78.0825, 12.164)
  point P125 (159.2574, -3.8401)
  point P126 (158.8836, -3.8779)
  point P127 (158.3607, -3.9307)
  point P128 (157.6896, -3.9985)
  point P129 (156.8706, -4.081)
  point P130 (155.9046, -4.1779)
  point P131 (154.7931, -4.2892)
  point P132 (153.5367, -4.4143)
  point P133 (152.1372, -4.5532)
  point P134 (150.5955, -4.7056)
  point P135 (148.914, -4.8712)
  point P136 (147.0936, -5.0494)
  point P137 (145.137, -5.2399)
  point P138 (143.0457, -5.4421)
  point P139 (140.8221, -5.6563)
  point P140 (138.4686, -5.8813)
  point P141 (135.9876, -6.1174)
  point P142 (133.3815, -6.3634)
  point P143 (130.6533, -6.6196)
  point P144 (127.8054, -6.8851)
  point P145 (124.8414, -7.1596)
  point P146 (121.7634, -7.4428)
  point P147 (118.5756, -7.7341)
  point P148 (115.2804, -8.0332)
  point P149 (111.8817, -8.3395)
  point P150 (108.3828, -8.6527)
  point P151 (104.787, -8.9722)
  point P152 (101.0985, -9.2974)
  point P153 (97.3206, -9.6283)
  point P154 (93.4572, -9.9643)
  point P155 (89.5122, -10.3048)
  point P156 (85.4898, -10.6492)
  point P157 (81.3936, -10.9969)
  point P158 (77.2284, -11.3479)
  point P159 (72.9975, -11.701)
  point P160 (68.7057, -12.0556)
  point P161 (64.3572, -12.4117)
  point P162 (59.9559, -12.7678)
  point P163 (55.5069, -13.1239)
  point P164 (51.0138, -13.4788)
  point P165 (46.4817, -13.8316)
  point P166 (41.9148, -14.182)
  point P167 (35.7035, -14.3277)
  point P168 (32.6946, -14.8708)
  point P169 (82.2459, 11.5043)
  point P170 (86.3364, 10.8401)
  point P171 (90.3495, 10.1732)
  point P172 (94.2816, 9.5051)
  point P173 (98.1288, 8.837)
  point P174 (101.8872, 8.171)
  point P175 (105.5538, 7.5086)
  point P176 (109.1244, 6.8507)
  point P177 (112.596, 6.1997)
  point P178 (115.9653, 5.5565)
  point P179 (119.2287, 4.9229)
  point P180 (122.3835, 4.3007)
  point P181 (125.4264, 3.6911)
  point P182 (128.3547, 3.0956)
  point P183 (131.1654, 2.5157)
  point P184 (133.8561, 1.9532)
  point P185 (136.4244, 1.4093)
  point P186 (138.8676, 0.8855)
  point P187 (141.1833, 0.383)
  point P188 (143.3697, -0.0964)
  point P189 (145.4247, -0.5518)
  point P190 (147.3462, -0.9817)
  point P191 (149.1327, -1.3852)
  point P192 (150.7821, -1.7608)
  point P193 (152.2935, -2.1073)
  point P194 (153.6651, -2.4241)
  point P195 (154.8954, -2.7103)
  point P196 (155.9838, -2.9647)
  point P197 (156.9291, -3.187)
  point P198 (157.7307, -3.376)
  point P199 (158.3871, -3.5317)
  dimension "d3" = 25.997
  dimension "d6" = 9.289
  dimension "d7" = 110
  dimension "d8" = 100
  dimension "d9" = 2
  dimension "d11" = 4.6493
  dimension "d25" = 7
  dimension "d26" = 3.5
  dimension "d27" = 8.379
  dimension "d28" = 30.083
  dimension "d29" = 5
  dimension "d30" = 5
  dimension "d32" = 59.8865
extrude "Extrusion2" add sketch "Sketch3" along normal blind 15 contours S1 S2 S0 L17 L16 L15 L14 L18 L19 L20
properties part number "4P.01.01.11-TW-v1-WingRibWFlapSingle" material "Polyurethane Foam"
